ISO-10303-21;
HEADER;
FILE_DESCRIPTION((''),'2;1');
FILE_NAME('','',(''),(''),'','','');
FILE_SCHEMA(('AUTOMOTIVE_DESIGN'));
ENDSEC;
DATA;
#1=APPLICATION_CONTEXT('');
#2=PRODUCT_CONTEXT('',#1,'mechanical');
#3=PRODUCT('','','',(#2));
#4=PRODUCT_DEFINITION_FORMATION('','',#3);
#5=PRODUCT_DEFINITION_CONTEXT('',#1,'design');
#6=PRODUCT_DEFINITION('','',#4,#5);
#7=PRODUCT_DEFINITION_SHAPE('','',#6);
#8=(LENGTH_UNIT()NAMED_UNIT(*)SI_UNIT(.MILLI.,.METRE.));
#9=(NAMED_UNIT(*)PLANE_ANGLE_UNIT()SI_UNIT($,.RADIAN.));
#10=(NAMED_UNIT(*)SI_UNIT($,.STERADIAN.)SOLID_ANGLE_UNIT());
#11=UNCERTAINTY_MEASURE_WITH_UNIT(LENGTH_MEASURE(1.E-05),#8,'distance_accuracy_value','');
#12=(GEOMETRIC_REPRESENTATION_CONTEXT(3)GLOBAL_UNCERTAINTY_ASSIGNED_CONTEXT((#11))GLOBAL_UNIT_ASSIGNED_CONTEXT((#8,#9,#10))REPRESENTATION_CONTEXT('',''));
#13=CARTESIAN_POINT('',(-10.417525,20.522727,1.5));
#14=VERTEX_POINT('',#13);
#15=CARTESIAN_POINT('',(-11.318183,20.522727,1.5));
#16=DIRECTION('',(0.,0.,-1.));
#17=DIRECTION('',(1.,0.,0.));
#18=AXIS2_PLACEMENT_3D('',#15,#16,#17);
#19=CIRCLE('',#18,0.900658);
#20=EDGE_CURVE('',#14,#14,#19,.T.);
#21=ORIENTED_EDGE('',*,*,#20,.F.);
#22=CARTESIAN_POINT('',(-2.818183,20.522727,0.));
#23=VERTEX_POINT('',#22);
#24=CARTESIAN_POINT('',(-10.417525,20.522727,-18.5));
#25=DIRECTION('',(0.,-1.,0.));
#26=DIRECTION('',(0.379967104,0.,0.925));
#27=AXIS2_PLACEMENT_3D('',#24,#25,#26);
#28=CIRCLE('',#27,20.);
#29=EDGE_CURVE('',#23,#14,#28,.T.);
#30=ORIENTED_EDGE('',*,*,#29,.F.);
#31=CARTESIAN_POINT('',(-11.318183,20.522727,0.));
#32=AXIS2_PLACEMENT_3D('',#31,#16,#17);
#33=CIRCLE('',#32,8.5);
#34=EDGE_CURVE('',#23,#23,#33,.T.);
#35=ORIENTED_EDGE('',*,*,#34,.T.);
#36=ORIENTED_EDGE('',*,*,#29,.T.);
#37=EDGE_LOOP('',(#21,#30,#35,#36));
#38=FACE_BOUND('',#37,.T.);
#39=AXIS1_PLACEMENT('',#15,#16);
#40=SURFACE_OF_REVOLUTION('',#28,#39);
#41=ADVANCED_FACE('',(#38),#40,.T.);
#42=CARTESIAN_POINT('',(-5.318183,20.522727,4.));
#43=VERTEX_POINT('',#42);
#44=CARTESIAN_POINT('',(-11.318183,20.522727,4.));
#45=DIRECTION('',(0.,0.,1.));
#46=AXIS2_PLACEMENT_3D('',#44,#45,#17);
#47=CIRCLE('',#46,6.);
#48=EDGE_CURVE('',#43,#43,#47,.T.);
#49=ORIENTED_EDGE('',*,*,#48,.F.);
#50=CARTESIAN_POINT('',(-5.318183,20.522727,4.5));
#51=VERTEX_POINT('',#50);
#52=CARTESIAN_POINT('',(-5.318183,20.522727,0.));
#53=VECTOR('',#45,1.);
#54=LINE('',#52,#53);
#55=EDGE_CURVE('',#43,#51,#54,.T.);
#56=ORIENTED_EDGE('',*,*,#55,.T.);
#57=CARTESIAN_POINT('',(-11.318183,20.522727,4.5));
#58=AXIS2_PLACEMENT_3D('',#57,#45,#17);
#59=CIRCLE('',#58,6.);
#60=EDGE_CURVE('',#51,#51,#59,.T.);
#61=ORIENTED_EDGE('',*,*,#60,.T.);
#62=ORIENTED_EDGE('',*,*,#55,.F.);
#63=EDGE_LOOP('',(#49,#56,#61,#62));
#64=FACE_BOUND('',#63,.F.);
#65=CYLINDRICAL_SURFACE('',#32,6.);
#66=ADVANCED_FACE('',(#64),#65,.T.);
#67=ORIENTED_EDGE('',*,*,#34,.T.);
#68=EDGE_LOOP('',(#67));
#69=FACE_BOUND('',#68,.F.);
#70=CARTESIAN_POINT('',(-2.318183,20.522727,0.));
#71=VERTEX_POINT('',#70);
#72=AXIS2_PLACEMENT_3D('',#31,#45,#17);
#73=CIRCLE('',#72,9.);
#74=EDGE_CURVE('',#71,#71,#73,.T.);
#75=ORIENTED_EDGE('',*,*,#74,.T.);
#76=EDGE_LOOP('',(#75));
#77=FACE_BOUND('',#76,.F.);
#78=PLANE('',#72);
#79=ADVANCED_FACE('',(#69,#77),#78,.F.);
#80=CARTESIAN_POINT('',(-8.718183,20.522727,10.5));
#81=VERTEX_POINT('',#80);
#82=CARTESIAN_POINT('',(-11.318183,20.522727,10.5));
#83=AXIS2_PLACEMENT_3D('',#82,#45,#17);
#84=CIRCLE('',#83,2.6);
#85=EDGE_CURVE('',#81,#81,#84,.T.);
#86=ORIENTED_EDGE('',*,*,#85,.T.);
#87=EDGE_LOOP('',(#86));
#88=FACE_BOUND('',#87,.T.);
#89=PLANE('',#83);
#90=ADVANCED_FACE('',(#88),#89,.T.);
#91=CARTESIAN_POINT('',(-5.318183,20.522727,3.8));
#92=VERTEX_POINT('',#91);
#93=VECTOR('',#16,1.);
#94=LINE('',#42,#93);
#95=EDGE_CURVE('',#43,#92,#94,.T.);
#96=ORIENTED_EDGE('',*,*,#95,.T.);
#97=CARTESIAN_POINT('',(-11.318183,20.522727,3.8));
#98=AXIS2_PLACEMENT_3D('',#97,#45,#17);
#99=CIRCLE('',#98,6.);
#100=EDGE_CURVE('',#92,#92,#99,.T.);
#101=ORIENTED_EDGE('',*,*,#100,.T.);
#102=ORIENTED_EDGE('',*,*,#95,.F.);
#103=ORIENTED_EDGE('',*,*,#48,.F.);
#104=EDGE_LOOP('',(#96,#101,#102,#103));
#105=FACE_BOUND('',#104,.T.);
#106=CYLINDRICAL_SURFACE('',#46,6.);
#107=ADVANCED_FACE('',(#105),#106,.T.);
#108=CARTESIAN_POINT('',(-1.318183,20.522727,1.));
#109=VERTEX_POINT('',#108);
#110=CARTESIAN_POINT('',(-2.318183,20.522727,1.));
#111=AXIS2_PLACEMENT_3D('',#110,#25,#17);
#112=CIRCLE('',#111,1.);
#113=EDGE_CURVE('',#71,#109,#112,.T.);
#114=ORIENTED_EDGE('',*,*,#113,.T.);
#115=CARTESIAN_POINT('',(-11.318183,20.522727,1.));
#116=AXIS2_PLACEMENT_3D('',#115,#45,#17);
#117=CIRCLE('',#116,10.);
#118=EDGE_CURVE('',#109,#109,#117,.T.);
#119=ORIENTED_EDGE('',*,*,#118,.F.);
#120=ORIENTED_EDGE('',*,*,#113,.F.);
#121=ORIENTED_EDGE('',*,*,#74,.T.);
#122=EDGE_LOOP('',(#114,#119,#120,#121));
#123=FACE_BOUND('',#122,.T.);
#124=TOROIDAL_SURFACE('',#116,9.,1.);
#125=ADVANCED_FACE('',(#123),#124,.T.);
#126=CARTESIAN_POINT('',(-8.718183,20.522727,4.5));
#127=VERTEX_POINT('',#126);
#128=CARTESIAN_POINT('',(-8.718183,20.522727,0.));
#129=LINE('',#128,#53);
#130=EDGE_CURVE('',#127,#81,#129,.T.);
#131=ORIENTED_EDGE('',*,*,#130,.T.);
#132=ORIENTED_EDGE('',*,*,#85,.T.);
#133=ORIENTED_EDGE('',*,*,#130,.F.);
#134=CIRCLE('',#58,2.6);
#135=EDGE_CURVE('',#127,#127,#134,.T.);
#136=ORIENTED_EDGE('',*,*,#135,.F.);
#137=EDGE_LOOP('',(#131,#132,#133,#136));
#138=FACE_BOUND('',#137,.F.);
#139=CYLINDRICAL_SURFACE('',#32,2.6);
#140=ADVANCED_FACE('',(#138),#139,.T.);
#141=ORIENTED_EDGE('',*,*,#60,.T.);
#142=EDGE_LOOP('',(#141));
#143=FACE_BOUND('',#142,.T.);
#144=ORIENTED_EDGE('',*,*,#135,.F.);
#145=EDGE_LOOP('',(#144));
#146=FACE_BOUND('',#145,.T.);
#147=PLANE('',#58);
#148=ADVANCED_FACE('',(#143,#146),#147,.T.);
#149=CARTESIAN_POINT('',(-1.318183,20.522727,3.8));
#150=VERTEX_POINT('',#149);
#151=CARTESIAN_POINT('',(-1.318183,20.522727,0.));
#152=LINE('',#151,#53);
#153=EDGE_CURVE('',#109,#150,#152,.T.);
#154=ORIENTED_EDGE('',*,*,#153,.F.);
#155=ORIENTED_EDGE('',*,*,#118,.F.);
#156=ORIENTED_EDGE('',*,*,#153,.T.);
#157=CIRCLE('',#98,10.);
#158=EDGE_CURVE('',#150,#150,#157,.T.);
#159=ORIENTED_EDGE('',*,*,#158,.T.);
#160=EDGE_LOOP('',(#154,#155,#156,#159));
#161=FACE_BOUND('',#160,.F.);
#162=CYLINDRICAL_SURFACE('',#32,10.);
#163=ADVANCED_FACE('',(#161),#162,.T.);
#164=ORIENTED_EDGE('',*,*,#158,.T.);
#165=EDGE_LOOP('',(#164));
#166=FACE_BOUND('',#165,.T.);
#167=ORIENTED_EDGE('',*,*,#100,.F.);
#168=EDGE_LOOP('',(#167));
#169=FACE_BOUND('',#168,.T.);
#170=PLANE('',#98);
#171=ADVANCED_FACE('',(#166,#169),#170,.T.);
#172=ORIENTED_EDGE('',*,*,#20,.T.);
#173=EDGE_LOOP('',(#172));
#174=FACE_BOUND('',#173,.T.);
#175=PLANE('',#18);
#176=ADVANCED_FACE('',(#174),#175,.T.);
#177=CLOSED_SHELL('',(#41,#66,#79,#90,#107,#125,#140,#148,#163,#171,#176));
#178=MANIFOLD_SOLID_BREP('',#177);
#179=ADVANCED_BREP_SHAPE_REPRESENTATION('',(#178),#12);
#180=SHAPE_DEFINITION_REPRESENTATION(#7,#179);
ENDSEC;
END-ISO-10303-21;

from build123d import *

# Parameters (mm, degrees)
F0_R     = 10
F0_R_2   = 6
F1_DEPTH = 4
F0_R_3   = 2.6
F2_DEPTH = 4.5
F3_DEPTH = 10.5
F4_R     = 8.5
F5_DEPTH = 1.5
F7_R     = 1
F8_DEPTH = 0.2


# Not quite as in the source:
# - a fillet or chamfer that OpenCascade refuses, or shapes differently, is made with other operations: its cross-section is extruded or revolved along the edge and cut away or added


with BuildPart() as f1:
    # F0 (on Top) → F1 (new body)
    with BuildSketch(Plane.XY):
        with Locations((-11.3181825727, 20.5227266997)):
            Circle(F0_R)
        with Locations((-11.3181825727, 20.5227266997)):
            Circle(F0_R_2, mode=Mode.SUBTRACT)
    extrude(amount=F1_DEPTH)

    # F0 (on Top) → F2 (join)
    with BuildSketch(Plane.XY):
        with Locations((-11.3181825727, 20.5227266997)):
            Circle(F0_R_2)
        with Locations((-11.3181825727, 20.5227266997)):
            Circle(F0_R_3, mode=Mode.SUBTRACT)
    extrude(amount=F2_DEPTH)

    # F0 (on Top) → F3 (join)
    with BuildSketch(Plane.XY):
        with Locations((-11.3181825727, 20.5227266997)):
            Circle(F0_R_3)
    extrude(amount=F3_DEPTH)

    # F4 (on face) → F5 (cut)
    with BuildSketch(Plane(origin=(0, 0, 0), x_dir=(1, 0, 0), z_dir=(0, 0, -1))):
        with Locations((-11.3181825727, -20.5227266997)):
            Circle(F4_R)
    extrude(amount=-F5_DEPTH, mode=Mode.SUBTRACT)

    # F6: fillet of radius 20 on 1 edges, made by hand

    # F6_s1 → F6_t2 (revolve)
    with BuildSketch(Plane.XZ.offset(-20.5227266997)):
        with BuildLine():
            ThreePointArc((-2.8181825727, 0), (-6.5445413033, 1.1214168703), (-10.4175246495, 1.5))
            Line((-10.4175246495, 1.5), (-2.8181825727, 1.5))
            Line((-2.8181825727, 1.5), (-2.8181825727, 0))
        make_face()
    revolve(axis=Axis((-11.3181825727, 20.5227266997, 1.5), (0, 0, -1)))

    # F7
    f7_edges = [f1.edges().sort_by_distance(p)[0] for p in [
        (-21.318183, 20.522727, 0),
    ]]
    fillet(f7_edges, radius=F7_R)

    # F8 (cut): a face of the model
    f8_faces = [f1.faces().sort_by_distance(p)[0] for p in [
        (-21.0353398602, 20.5227266997, 4),
    ]]
    extrude(f8_faces, amount=-F8_DEPTH, mode=Mode.SUBTRACT)


solid = f1.part
